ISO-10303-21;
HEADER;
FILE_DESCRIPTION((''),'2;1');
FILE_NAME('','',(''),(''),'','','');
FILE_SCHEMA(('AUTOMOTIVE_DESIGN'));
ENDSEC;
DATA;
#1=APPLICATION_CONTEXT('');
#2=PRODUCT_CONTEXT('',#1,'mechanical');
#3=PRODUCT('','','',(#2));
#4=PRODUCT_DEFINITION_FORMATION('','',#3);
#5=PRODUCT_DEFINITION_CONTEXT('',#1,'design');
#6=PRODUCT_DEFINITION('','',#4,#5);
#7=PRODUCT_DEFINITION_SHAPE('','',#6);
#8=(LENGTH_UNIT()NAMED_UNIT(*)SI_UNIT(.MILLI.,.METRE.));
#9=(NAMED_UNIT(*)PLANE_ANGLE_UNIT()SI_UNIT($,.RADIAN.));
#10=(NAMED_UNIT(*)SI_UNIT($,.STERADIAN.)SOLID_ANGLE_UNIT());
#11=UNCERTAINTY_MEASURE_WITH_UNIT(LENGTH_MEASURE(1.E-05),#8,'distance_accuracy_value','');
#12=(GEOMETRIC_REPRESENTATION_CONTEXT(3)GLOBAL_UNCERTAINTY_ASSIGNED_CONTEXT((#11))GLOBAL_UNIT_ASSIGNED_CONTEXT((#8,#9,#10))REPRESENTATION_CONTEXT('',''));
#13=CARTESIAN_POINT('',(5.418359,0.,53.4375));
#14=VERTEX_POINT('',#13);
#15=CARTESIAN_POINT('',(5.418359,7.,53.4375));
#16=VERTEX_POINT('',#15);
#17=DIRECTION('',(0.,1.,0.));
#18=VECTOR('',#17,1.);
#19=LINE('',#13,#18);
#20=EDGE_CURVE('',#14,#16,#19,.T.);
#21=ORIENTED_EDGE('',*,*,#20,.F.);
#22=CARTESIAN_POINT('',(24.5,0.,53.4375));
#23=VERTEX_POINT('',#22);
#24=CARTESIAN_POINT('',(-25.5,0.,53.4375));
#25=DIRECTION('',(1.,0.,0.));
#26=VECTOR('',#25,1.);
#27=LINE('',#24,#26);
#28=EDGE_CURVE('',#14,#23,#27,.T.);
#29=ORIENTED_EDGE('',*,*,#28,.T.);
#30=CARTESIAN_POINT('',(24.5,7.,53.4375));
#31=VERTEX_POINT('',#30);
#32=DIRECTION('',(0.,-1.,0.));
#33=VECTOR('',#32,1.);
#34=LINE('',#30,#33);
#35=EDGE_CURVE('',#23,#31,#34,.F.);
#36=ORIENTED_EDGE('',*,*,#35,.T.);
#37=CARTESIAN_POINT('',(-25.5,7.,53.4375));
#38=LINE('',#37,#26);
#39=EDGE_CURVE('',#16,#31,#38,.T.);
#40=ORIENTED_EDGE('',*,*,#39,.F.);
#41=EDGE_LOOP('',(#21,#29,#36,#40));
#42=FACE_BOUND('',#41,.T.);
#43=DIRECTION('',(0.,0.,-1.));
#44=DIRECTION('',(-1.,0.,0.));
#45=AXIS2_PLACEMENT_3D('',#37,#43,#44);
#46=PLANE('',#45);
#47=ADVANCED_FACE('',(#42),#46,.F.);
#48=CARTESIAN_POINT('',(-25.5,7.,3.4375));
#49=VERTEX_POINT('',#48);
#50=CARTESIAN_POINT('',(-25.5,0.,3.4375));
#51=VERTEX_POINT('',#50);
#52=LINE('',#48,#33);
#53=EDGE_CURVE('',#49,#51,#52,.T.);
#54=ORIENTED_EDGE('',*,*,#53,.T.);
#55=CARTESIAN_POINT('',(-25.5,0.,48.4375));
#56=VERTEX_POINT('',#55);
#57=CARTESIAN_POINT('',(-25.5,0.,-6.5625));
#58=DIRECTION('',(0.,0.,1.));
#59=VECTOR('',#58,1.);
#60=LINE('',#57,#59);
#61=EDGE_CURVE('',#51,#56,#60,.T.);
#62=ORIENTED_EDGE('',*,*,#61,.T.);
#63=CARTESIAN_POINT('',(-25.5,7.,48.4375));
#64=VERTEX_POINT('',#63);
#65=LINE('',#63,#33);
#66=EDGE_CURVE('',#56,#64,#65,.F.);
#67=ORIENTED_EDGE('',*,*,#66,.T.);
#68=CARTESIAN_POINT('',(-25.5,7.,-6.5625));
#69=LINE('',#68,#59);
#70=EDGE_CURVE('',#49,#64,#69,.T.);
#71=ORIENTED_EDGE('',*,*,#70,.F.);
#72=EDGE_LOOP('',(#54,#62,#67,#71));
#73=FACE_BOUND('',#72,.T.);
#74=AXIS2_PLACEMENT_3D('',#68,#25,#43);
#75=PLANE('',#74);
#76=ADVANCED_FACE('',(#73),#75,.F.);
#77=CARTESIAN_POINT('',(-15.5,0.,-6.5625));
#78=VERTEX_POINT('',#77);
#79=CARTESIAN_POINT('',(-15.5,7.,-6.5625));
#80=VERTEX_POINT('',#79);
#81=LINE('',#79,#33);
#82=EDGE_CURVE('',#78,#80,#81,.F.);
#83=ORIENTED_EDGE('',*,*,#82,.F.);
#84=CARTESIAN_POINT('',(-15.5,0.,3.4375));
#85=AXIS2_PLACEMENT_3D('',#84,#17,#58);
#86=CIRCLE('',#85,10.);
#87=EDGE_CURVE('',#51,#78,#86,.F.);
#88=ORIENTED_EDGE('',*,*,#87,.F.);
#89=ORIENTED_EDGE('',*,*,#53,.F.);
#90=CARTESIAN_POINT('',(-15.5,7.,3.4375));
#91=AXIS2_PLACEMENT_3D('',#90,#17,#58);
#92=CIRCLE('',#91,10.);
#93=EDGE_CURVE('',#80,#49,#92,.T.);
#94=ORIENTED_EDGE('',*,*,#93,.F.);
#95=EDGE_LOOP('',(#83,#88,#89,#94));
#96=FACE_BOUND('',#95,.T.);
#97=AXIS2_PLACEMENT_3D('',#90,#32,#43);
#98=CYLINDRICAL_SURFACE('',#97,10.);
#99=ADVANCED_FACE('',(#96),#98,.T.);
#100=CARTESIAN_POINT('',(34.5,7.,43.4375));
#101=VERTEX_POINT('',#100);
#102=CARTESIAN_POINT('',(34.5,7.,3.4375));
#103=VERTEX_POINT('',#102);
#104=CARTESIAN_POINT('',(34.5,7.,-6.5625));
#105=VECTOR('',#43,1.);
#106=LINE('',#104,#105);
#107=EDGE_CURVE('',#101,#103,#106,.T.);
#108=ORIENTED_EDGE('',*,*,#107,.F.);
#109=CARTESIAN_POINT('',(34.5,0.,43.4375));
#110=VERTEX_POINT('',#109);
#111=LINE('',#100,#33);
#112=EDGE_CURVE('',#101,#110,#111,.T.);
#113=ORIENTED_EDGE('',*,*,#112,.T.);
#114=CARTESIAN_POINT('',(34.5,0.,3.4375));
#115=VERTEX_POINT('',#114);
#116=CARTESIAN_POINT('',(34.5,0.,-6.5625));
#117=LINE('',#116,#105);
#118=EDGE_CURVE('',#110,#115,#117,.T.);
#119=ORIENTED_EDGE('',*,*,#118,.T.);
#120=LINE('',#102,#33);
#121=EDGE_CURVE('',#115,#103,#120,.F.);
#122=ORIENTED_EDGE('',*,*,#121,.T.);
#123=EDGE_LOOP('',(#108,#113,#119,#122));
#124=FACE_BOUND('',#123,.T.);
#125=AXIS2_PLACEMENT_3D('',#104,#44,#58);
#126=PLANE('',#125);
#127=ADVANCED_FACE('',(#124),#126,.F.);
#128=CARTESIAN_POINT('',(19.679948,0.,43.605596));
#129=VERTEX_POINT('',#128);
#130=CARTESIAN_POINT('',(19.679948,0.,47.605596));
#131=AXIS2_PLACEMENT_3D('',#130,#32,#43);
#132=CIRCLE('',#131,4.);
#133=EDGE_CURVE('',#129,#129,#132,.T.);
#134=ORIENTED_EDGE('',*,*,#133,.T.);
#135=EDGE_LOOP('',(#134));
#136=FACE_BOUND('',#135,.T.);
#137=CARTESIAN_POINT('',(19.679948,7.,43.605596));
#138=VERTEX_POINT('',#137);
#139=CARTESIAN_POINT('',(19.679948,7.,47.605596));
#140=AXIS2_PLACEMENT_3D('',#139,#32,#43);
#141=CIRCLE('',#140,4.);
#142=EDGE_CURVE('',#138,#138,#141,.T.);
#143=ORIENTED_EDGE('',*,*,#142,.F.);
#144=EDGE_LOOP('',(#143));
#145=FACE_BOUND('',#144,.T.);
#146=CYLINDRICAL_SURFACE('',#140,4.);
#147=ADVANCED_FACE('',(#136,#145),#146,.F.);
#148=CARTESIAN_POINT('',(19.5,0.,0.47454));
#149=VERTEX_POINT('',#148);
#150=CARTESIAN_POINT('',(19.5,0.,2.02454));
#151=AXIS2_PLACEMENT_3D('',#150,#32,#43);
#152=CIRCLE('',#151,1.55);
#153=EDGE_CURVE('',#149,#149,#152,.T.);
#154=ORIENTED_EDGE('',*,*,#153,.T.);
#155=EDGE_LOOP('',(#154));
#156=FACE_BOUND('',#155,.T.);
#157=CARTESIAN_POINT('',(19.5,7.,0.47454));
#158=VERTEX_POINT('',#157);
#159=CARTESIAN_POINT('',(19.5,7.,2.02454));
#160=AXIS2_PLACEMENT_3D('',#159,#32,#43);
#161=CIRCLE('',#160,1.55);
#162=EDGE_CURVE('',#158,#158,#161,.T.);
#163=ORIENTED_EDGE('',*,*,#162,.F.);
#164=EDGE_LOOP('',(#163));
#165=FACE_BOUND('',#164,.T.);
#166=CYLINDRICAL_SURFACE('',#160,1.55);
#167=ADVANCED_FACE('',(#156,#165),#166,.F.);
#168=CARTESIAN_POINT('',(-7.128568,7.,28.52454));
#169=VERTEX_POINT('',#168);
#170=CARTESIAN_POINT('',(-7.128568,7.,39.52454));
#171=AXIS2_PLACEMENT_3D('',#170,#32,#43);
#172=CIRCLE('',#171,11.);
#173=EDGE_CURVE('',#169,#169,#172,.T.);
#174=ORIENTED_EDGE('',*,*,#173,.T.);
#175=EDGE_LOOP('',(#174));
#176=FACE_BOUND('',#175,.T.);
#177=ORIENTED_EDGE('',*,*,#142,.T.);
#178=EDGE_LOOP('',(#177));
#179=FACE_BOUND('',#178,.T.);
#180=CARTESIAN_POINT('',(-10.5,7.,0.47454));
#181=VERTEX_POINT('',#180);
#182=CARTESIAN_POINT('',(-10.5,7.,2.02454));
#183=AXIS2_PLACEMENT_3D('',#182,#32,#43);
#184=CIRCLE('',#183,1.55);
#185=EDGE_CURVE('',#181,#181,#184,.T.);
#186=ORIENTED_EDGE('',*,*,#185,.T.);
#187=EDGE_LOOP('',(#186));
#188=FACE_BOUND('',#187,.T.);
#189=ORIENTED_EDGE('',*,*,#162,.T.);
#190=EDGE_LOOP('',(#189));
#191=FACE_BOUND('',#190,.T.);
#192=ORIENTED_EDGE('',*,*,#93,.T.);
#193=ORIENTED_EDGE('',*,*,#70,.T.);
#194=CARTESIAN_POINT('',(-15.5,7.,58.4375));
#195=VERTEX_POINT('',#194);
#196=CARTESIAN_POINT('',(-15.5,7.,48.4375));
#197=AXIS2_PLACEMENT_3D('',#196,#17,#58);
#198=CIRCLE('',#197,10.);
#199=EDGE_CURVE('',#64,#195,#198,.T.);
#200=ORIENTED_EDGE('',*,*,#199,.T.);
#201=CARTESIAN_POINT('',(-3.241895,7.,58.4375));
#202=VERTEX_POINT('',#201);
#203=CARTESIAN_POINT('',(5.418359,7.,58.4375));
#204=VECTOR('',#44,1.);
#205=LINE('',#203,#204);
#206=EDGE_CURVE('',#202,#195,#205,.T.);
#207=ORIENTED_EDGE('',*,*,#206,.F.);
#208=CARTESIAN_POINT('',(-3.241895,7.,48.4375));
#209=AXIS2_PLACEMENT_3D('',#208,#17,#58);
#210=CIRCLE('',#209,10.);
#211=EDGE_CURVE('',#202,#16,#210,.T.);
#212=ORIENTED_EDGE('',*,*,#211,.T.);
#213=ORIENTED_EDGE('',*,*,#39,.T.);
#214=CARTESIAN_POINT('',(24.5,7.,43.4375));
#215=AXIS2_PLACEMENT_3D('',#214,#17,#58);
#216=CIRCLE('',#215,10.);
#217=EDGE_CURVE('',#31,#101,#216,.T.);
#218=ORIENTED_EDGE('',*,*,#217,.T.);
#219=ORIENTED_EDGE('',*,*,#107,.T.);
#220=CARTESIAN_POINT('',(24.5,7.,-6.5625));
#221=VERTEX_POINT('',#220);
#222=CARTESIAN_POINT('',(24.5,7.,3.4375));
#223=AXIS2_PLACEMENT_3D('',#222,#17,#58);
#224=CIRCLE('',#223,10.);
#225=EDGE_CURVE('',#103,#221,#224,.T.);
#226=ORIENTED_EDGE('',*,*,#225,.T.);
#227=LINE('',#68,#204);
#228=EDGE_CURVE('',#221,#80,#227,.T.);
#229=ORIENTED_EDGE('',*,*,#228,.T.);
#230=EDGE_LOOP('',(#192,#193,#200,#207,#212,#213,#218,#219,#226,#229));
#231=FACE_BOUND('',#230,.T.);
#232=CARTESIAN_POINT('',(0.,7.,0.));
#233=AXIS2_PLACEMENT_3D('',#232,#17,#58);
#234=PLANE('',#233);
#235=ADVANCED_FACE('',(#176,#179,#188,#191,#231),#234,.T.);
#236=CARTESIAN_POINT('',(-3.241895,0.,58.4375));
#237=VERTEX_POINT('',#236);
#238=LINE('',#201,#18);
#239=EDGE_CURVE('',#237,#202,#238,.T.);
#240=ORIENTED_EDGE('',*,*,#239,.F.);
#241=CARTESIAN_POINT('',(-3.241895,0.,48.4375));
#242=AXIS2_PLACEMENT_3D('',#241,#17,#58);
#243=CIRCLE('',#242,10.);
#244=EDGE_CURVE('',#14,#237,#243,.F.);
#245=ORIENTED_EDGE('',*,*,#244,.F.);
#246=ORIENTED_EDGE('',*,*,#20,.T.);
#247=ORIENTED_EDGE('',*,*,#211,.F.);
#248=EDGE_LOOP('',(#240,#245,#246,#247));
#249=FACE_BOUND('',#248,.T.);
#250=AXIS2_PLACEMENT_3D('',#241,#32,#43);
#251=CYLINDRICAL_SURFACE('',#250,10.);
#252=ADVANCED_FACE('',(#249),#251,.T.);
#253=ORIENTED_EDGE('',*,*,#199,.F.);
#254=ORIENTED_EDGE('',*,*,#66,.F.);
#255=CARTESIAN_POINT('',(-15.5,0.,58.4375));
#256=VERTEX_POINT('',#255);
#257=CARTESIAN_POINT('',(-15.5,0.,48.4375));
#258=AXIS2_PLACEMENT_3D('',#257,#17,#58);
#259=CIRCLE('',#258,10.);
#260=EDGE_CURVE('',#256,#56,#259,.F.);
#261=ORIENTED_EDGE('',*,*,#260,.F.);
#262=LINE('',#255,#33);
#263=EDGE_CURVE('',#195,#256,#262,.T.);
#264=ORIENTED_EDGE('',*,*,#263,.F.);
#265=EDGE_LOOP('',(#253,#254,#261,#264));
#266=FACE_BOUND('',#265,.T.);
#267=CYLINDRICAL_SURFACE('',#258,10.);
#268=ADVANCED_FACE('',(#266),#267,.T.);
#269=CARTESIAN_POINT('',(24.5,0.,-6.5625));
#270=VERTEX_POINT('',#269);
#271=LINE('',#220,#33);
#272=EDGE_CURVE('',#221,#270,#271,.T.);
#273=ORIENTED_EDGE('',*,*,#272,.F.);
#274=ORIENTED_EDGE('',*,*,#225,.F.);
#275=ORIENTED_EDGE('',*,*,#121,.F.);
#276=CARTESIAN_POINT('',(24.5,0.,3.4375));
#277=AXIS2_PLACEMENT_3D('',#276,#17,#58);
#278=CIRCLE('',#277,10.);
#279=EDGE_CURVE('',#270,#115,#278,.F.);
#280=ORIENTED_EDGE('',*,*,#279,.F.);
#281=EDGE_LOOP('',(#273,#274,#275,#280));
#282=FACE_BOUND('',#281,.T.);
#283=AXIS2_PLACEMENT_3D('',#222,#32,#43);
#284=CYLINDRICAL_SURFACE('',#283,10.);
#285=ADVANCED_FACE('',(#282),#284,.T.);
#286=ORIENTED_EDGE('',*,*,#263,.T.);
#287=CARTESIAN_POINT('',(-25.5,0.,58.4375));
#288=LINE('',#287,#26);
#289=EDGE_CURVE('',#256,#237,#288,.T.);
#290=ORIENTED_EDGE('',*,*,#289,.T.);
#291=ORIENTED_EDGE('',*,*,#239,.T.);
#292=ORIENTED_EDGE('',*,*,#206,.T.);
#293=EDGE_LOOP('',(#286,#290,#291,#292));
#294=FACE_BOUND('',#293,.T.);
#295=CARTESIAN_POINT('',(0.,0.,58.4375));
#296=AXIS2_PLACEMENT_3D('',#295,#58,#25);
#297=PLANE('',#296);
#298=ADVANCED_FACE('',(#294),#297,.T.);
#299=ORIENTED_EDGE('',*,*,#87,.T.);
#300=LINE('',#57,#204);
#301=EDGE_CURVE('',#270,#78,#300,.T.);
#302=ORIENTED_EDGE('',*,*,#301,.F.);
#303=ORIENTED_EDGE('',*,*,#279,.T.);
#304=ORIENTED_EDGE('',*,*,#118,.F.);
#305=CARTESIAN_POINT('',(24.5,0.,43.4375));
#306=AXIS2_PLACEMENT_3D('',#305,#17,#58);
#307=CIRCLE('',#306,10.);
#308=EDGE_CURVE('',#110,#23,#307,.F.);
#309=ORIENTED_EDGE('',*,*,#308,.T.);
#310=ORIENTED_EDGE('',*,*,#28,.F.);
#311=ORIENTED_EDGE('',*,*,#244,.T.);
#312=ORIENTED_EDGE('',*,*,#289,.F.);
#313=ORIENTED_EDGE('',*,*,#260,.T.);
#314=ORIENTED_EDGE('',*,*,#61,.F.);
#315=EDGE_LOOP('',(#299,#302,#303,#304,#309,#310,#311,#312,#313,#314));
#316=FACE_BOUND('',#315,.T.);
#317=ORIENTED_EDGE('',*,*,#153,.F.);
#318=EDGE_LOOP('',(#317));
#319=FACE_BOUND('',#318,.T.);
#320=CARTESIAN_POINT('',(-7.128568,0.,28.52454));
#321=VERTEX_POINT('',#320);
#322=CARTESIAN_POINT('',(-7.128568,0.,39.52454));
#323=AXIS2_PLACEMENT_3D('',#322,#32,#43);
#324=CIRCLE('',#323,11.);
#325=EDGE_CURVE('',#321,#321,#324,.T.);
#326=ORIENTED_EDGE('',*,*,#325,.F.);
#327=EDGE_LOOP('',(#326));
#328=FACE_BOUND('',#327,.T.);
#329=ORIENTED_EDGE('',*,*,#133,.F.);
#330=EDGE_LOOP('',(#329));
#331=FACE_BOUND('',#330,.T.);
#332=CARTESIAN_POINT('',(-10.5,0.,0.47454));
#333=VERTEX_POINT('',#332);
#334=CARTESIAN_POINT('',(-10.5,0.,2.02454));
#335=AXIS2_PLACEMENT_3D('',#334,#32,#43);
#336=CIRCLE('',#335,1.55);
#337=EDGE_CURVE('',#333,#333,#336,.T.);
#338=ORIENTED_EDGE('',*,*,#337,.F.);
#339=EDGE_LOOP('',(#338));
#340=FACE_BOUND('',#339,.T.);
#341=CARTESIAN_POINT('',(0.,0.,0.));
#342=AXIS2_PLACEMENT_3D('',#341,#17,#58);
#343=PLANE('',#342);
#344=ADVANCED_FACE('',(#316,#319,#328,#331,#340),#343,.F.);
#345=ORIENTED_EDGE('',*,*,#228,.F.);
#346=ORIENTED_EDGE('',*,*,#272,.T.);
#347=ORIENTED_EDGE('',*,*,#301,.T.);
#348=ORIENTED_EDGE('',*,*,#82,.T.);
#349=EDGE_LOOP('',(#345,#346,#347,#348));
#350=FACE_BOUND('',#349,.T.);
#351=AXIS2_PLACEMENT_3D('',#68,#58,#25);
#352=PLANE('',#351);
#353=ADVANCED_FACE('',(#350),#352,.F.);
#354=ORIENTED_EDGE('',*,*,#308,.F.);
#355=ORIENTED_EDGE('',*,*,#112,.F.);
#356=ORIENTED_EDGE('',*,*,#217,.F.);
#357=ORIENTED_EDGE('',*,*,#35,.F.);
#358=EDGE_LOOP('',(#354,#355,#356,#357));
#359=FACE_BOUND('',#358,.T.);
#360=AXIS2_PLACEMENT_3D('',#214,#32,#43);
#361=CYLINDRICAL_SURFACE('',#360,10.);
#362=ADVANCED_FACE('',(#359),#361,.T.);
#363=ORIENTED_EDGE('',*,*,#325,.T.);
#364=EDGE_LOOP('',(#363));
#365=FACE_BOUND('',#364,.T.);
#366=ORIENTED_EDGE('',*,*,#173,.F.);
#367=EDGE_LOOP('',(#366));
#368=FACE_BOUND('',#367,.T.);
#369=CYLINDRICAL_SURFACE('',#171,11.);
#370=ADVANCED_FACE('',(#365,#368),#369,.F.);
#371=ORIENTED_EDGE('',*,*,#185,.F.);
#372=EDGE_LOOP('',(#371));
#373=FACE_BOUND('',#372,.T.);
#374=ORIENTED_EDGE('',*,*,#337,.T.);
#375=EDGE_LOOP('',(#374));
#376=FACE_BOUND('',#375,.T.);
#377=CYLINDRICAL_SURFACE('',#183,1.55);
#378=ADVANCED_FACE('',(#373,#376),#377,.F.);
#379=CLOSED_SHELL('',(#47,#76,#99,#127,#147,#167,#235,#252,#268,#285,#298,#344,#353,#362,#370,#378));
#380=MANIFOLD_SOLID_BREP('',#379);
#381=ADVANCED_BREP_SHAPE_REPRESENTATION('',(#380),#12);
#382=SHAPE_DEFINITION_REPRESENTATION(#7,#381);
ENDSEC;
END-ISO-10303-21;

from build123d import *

# Parameters (mm, degrees)
SKETCH_1_W          = 60
SKETCH_1_H          = 60
EXTRUDE_1_DEPTH     = 7
SKETCH_2_R          = 4
SKETCH_2_R_2        = 11
CUT_EXTRUDE_1_DEPTH = 64.990752506
SKETCH_3_R          = 1.55
CUT_EXTRUDE_2_DEPTH = 64.990752506
FILLET_2_R          = 10
SKETCH_4_W          = 30.91835897
SKETCH_4_H          = 7
EXTRUDE_2_DEPTH     = 5
FILLET_3_R          = 10


with BuildPart() as part:
    # 草图1 → 凸台-拉伸1 (new body)
    with BuildSketch(Plane(origin=(0, 0, 0), x_dir=(1, 0, 0), z_dir=(0, 1, 0))):
        with Locations((4.5, -23.4375)):
            Rectangle(SKETCH_1_W, SKETCH_1_H)
    extrude(amount=EXTRUDE_1_DEPTH)

    # 草图2 → 切除-拉伸1 (cut, through all)
    with BuildSketch(Plane.XZ):
        with Locations(Location((19.679947821, 47.605596436, 0), (0, 0, 270))):
            Circle(SKETCH_2_R)
        with Locations(Location((-7.128568068, 39.524539832, 0), (0, 0, 270))):
            Circle(SKETCH_2_R_2)
    extrude(amount=-CUT_EXTRUDE_1_DEPTH, mode=Mode.SUBTRACT)

    # 草图3 → 切除-拉伸2 (cut, through all)
    with BuildSketch(Plane.XZ):
        with Locations(Location((-10.5, 2.024539832, 0), (0, 0, 270))):
            Circle(SKETCH_3_R)
        with Locations(Location((19.5, 2.024539832, 0), (0, 0, 270))):
            Circle(SKETCH_3_R)
    extrude(amount=-CUT_EXTRUDE_2_DEPTH, mode=Mode.SUBTRACT)

    # 圆角2
    fillet_2_edges = [part.edges().sort_by_distance(p)[0] for p in [
        (-25.5, 3.5, -6.5625),
        (34.5, 3.5, -6.5625),
        (34.5, 3.5, 53.4375),
    ]]
    fillet(fillet_2_edges, radius=FILLET_2_R)

    # 草图4 → 凸台-拉伸2 (add)
    with BuildSketch(Plane.XY.offset(53.4375)):
        with Locations((-10.040820515, 3.5)):
            Rectangle(SKETCH_4_W, SKETCH_4_H)
    extrude(amount=EXTRUDE_2_DEPTH)

    # 圆角3
    # the kernel refuses this fillet: 10 mm, written as the material it takes off along each edge
    with BuildSketch(Plane(origin=(5.41835897, -21.650635095, 58.4375), x_dir=(-1, 0, 0), z_dir=(0, 1, 0))) as fillet_3_piece_1:
        with BuildLine():
            CenterArc((8.660254038, -10), FILLET_3_R, 90, 60)
            Line((0, -5), (-0.173205081, -4.9))
            ThreePointArc((-0.173205081, -4.9), (-0.2, -2.5), (-0.2, 0))
            Line((-0.2, 0), (0, 0.2))
            Line((0, 0.2), (8.660254038, 0.2))
            Line((8.660254038, 0.2), (8.660254038, 0))
        make_face()
    extrude(amount=50.301270189, mode=Mode.SUBTRACT)
    with BuildSketch(Plane(origin=(-25.5, 32, 58.4375), x_dir=(0, 0, -1), z_dir=(0, -1, 0))) as fillet_3_piece_2:
        with BuildLine():
            CenterArc((FILLET_3_R, FILLET_3_R), FILLET_3_R, 180, 90)
            Line((0, FILLET_3_R), (-FILLET_3_R * 0.02, FILLET_3_R))
            Line((-FILLET_3_R * 0.02, FILLET_3_R), (-FILLET_3_R * 0.02, -FILLET_3_R * 0.02))
            Line((-FILLET_3_R * 0.02, -FILLET_3_R * 0.02), (FILLET_3_R, -FILLET_3_R * 0.02))
            Line((FILLET_3_R, -FILLET_3_R * 0.02), (FILLET_3_R, 0))
        make_face()
    extrude(amount=57, mode=Mode.SUBTRACT)


solid = part.part
